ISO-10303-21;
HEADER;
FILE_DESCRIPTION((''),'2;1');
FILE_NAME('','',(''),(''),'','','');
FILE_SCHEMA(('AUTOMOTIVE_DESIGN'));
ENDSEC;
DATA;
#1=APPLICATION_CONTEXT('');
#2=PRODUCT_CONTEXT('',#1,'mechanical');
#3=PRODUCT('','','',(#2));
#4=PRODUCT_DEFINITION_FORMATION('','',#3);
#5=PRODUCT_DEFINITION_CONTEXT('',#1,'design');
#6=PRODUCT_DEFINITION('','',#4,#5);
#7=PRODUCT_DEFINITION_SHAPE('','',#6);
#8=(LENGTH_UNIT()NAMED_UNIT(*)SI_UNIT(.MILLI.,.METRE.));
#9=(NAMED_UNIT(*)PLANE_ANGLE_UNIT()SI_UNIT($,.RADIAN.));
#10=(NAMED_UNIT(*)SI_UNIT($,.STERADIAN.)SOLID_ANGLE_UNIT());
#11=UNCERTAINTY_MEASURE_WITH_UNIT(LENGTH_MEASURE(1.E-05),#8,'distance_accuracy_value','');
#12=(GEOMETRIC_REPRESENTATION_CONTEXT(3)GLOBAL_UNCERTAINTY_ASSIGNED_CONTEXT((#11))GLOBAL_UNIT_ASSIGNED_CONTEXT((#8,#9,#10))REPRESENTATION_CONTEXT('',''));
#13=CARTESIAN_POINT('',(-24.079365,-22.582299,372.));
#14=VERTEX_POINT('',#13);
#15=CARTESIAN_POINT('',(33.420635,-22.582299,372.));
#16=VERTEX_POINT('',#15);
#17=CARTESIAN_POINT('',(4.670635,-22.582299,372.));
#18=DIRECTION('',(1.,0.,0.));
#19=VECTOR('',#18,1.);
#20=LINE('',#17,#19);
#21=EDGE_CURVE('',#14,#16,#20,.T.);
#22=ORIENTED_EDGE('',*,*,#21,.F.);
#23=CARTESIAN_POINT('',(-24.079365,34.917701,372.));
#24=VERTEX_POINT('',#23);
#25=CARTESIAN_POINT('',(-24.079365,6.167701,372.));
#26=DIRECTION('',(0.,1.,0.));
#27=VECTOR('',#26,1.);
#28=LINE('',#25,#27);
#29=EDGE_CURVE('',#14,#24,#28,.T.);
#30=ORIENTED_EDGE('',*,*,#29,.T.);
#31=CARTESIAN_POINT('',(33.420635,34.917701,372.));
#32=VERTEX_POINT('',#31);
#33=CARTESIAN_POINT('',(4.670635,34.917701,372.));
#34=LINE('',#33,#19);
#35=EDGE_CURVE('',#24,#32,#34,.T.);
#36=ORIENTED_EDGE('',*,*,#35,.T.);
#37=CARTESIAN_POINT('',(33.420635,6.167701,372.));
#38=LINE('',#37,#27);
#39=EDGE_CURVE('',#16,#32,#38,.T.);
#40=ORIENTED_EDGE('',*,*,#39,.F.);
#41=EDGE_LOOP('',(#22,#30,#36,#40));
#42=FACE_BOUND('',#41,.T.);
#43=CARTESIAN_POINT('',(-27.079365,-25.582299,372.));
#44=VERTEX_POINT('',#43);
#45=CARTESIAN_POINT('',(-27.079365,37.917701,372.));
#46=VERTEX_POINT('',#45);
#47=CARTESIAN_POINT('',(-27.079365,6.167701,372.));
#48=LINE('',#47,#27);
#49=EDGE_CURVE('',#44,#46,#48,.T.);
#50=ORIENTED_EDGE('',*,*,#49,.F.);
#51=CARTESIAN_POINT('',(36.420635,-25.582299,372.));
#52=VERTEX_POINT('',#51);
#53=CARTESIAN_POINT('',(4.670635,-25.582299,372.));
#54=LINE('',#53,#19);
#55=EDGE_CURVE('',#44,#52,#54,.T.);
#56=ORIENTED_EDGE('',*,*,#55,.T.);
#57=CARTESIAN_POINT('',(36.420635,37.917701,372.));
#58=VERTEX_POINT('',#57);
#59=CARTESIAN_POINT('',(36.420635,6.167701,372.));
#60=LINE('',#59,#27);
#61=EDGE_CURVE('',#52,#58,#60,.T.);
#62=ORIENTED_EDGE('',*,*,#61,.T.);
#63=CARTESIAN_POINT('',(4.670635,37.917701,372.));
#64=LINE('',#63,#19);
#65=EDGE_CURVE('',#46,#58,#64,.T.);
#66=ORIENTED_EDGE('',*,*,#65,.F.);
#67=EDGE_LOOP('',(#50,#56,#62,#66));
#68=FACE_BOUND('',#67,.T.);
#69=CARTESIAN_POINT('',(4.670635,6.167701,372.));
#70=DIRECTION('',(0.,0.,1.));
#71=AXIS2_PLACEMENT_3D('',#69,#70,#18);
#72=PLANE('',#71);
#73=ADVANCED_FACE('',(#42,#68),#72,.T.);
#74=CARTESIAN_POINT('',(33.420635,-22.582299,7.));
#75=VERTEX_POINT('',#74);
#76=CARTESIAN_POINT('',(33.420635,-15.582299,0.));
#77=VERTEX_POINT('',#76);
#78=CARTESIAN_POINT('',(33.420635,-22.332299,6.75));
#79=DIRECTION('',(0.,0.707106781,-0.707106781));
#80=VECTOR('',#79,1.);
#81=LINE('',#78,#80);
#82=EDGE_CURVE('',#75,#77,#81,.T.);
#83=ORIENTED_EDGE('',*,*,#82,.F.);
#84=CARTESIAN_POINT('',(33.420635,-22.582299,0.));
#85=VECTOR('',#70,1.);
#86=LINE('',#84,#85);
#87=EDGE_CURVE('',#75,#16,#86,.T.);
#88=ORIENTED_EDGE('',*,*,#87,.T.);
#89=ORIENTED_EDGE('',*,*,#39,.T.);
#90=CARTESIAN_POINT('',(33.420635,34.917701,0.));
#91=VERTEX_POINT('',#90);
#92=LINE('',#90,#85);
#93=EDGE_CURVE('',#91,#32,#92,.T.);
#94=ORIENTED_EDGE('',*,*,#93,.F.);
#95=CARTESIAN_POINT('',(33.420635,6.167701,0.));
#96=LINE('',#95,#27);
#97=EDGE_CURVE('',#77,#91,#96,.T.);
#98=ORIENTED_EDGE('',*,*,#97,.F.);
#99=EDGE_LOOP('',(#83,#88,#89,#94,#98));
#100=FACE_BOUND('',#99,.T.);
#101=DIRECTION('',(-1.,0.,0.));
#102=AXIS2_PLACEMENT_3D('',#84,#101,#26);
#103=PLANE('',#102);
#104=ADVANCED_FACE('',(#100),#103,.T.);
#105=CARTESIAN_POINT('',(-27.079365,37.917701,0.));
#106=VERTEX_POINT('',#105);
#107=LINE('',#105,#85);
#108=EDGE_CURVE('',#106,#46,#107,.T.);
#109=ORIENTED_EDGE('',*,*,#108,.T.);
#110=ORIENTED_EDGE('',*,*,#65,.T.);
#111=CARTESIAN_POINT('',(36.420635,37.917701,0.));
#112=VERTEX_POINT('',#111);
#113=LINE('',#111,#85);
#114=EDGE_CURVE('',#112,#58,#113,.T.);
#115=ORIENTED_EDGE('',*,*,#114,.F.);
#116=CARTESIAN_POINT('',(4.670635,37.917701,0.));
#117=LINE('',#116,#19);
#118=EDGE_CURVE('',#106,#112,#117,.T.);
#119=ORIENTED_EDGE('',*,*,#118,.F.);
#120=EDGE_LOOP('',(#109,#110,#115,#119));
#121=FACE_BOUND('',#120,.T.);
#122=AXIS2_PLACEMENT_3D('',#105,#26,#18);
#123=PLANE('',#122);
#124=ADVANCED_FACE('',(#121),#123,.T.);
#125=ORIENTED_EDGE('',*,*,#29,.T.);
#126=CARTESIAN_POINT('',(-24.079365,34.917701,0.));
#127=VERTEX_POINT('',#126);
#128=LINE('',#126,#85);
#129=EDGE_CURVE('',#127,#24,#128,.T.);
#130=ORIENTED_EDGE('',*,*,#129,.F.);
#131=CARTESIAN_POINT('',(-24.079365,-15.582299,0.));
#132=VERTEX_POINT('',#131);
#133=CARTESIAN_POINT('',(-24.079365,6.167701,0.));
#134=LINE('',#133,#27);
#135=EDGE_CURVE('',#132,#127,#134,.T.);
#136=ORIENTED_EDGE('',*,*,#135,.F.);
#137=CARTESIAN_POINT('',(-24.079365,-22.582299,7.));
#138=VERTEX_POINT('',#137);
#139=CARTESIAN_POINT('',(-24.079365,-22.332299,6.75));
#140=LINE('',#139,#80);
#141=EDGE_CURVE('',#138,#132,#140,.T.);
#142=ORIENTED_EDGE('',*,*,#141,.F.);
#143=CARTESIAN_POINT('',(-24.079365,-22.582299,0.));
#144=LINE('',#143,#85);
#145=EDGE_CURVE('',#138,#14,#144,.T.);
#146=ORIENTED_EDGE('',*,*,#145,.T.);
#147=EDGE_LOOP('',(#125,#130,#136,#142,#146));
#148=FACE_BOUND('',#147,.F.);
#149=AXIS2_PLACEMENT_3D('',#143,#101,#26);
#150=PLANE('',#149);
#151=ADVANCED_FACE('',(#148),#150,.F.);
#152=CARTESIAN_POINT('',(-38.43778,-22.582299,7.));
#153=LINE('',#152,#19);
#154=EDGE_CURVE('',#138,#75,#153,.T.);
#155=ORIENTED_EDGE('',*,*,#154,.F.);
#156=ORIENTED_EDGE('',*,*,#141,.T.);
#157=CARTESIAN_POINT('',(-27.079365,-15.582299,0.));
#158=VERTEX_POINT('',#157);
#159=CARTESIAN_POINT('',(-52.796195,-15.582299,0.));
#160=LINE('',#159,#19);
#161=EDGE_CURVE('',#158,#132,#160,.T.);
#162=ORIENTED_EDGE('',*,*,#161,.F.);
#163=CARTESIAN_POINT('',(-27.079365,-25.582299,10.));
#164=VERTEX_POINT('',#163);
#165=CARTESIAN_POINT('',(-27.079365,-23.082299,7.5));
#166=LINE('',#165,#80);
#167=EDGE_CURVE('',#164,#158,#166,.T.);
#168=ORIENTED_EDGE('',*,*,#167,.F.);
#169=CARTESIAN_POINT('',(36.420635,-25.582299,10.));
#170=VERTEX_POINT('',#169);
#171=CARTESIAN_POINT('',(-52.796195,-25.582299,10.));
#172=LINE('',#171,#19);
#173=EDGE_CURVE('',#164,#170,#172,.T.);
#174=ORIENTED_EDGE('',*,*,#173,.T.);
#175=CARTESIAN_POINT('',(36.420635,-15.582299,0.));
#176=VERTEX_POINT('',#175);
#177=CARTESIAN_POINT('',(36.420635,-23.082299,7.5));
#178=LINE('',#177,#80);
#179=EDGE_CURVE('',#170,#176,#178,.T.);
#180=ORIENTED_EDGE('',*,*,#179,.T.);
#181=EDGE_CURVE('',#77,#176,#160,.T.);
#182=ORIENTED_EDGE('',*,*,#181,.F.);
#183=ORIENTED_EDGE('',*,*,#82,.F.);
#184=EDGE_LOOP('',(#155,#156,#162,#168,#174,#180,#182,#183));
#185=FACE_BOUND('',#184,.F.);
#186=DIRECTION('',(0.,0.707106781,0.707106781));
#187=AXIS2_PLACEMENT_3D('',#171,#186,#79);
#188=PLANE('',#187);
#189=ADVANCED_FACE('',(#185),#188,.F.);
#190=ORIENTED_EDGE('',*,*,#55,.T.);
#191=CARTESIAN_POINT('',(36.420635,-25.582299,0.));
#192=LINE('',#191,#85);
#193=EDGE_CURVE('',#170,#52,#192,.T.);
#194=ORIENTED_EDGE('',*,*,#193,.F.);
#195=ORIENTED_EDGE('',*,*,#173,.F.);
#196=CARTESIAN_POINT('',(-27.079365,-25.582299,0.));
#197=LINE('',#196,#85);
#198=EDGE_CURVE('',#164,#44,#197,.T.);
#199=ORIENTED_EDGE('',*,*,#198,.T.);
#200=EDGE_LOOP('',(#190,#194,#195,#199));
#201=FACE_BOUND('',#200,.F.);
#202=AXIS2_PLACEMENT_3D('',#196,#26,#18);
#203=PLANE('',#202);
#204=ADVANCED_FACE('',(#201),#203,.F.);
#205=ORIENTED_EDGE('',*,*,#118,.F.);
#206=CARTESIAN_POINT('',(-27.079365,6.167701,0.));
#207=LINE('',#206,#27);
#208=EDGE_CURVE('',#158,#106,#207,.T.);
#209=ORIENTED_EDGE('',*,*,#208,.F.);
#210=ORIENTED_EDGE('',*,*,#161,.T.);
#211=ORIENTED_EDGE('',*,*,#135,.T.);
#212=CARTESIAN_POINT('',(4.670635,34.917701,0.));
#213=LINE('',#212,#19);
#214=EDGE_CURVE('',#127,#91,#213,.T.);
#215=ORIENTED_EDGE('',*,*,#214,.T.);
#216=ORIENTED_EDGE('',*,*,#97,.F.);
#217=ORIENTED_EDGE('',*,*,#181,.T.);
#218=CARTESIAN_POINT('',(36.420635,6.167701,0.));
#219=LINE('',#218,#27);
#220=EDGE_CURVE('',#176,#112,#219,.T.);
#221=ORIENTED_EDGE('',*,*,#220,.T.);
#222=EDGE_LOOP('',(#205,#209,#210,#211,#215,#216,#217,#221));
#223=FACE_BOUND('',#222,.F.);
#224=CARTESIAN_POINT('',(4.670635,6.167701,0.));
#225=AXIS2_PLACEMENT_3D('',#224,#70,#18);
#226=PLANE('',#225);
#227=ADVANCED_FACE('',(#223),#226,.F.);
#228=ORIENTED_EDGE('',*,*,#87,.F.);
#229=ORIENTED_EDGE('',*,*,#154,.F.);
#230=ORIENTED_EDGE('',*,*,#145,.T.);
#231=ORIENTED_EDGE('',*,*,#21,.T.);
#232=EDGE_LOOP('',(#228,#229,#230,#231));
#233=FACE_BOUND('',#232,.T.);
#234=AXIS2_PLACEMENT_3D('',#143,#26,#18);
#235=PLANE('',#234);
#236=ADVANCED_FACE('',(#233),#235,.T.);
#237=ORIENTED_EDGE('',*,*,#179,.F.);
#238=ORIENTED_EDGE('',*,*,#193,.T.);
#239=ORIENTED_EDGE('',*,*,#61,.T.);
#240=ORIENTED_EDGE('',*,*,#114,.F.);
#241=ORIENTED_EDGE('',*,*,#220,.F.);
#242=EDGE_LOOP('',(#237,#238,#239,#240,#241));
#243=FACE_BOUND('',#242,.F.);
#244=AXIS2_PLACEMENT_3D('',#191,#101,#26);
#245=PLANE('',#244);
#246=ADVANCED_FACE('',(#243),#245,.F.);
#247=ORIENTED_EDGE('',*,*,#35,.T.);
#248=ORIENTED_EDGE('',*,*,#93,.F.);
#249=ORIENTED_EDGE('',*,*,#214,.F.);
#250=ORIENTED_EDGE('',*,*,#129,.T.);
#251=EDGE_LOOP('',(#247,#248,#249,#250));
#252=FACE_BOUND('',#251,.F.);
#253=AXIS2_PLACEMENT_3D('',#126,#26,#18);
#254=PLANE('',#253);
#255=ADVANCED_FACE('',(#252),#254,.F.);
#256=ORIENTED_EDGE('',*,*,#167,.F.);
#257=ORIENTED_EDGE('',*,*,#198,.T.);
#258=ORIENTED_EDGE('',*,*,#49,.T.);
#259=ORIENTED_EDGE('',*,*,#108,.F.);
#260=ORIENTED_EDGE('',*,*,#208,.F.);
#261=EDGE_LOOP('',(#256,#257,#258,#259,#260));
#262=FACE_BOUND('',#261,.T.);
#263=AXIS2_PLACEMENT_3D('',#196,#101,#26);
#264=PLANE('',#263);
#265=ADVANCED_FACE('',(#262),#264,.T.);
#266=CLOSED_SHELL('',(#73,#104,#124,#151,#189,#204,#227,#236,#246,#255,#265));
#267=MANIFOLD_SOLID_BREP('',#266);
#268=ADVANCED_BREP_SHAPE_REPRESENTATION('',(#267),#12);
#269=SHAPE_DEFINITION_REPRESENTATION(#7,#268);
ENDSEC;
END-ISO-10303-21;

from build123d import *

# Parameters (mm, degrees)
F0_W        = 63.5
F0_H        = 63.5
F0_W_2      = 57.5
F0_H_2      = 57.5
F1_DEPTH    = 372
F2_T1_DEPTH = 114.9336597593


# Not quite as in the source:
# - a fillet or chamfer that OpenCascade refuses, or shapes differently, is made with other operations: its cross-section is extruded or revolved along the edge and cut away or added


with BuildPart() as f1:
    # F0 (on Top) → F1 (new body)
    with BuildSketch(Plane.XY):
        with Locations((4.6706348658, 6.1677011834)):
            Rectangle(F0_W, F0_H)
        with Locations((4.6706348658, 6.1677011834)):
            Rectangle(F0_W_2, F0_H_2, mode=Mode.SUBTRACT)
    extrude(amount=F1_DEPTH)

    # F2: chamfer of 10 on 1 edges, made by hand

    # F2_s2 → F2_t1 (cut)
    with BuildSketch(Plane.YZ.offset(-52.7961950139)):
        Polygon((-25.5822988166, 10), (-15.5822988166, 0), (-25.5822988166, 0), align=None)
    extrude(amount=F2_T1_DEPTH, mode=Mode.SUBTRACT)


solid = f1.part
